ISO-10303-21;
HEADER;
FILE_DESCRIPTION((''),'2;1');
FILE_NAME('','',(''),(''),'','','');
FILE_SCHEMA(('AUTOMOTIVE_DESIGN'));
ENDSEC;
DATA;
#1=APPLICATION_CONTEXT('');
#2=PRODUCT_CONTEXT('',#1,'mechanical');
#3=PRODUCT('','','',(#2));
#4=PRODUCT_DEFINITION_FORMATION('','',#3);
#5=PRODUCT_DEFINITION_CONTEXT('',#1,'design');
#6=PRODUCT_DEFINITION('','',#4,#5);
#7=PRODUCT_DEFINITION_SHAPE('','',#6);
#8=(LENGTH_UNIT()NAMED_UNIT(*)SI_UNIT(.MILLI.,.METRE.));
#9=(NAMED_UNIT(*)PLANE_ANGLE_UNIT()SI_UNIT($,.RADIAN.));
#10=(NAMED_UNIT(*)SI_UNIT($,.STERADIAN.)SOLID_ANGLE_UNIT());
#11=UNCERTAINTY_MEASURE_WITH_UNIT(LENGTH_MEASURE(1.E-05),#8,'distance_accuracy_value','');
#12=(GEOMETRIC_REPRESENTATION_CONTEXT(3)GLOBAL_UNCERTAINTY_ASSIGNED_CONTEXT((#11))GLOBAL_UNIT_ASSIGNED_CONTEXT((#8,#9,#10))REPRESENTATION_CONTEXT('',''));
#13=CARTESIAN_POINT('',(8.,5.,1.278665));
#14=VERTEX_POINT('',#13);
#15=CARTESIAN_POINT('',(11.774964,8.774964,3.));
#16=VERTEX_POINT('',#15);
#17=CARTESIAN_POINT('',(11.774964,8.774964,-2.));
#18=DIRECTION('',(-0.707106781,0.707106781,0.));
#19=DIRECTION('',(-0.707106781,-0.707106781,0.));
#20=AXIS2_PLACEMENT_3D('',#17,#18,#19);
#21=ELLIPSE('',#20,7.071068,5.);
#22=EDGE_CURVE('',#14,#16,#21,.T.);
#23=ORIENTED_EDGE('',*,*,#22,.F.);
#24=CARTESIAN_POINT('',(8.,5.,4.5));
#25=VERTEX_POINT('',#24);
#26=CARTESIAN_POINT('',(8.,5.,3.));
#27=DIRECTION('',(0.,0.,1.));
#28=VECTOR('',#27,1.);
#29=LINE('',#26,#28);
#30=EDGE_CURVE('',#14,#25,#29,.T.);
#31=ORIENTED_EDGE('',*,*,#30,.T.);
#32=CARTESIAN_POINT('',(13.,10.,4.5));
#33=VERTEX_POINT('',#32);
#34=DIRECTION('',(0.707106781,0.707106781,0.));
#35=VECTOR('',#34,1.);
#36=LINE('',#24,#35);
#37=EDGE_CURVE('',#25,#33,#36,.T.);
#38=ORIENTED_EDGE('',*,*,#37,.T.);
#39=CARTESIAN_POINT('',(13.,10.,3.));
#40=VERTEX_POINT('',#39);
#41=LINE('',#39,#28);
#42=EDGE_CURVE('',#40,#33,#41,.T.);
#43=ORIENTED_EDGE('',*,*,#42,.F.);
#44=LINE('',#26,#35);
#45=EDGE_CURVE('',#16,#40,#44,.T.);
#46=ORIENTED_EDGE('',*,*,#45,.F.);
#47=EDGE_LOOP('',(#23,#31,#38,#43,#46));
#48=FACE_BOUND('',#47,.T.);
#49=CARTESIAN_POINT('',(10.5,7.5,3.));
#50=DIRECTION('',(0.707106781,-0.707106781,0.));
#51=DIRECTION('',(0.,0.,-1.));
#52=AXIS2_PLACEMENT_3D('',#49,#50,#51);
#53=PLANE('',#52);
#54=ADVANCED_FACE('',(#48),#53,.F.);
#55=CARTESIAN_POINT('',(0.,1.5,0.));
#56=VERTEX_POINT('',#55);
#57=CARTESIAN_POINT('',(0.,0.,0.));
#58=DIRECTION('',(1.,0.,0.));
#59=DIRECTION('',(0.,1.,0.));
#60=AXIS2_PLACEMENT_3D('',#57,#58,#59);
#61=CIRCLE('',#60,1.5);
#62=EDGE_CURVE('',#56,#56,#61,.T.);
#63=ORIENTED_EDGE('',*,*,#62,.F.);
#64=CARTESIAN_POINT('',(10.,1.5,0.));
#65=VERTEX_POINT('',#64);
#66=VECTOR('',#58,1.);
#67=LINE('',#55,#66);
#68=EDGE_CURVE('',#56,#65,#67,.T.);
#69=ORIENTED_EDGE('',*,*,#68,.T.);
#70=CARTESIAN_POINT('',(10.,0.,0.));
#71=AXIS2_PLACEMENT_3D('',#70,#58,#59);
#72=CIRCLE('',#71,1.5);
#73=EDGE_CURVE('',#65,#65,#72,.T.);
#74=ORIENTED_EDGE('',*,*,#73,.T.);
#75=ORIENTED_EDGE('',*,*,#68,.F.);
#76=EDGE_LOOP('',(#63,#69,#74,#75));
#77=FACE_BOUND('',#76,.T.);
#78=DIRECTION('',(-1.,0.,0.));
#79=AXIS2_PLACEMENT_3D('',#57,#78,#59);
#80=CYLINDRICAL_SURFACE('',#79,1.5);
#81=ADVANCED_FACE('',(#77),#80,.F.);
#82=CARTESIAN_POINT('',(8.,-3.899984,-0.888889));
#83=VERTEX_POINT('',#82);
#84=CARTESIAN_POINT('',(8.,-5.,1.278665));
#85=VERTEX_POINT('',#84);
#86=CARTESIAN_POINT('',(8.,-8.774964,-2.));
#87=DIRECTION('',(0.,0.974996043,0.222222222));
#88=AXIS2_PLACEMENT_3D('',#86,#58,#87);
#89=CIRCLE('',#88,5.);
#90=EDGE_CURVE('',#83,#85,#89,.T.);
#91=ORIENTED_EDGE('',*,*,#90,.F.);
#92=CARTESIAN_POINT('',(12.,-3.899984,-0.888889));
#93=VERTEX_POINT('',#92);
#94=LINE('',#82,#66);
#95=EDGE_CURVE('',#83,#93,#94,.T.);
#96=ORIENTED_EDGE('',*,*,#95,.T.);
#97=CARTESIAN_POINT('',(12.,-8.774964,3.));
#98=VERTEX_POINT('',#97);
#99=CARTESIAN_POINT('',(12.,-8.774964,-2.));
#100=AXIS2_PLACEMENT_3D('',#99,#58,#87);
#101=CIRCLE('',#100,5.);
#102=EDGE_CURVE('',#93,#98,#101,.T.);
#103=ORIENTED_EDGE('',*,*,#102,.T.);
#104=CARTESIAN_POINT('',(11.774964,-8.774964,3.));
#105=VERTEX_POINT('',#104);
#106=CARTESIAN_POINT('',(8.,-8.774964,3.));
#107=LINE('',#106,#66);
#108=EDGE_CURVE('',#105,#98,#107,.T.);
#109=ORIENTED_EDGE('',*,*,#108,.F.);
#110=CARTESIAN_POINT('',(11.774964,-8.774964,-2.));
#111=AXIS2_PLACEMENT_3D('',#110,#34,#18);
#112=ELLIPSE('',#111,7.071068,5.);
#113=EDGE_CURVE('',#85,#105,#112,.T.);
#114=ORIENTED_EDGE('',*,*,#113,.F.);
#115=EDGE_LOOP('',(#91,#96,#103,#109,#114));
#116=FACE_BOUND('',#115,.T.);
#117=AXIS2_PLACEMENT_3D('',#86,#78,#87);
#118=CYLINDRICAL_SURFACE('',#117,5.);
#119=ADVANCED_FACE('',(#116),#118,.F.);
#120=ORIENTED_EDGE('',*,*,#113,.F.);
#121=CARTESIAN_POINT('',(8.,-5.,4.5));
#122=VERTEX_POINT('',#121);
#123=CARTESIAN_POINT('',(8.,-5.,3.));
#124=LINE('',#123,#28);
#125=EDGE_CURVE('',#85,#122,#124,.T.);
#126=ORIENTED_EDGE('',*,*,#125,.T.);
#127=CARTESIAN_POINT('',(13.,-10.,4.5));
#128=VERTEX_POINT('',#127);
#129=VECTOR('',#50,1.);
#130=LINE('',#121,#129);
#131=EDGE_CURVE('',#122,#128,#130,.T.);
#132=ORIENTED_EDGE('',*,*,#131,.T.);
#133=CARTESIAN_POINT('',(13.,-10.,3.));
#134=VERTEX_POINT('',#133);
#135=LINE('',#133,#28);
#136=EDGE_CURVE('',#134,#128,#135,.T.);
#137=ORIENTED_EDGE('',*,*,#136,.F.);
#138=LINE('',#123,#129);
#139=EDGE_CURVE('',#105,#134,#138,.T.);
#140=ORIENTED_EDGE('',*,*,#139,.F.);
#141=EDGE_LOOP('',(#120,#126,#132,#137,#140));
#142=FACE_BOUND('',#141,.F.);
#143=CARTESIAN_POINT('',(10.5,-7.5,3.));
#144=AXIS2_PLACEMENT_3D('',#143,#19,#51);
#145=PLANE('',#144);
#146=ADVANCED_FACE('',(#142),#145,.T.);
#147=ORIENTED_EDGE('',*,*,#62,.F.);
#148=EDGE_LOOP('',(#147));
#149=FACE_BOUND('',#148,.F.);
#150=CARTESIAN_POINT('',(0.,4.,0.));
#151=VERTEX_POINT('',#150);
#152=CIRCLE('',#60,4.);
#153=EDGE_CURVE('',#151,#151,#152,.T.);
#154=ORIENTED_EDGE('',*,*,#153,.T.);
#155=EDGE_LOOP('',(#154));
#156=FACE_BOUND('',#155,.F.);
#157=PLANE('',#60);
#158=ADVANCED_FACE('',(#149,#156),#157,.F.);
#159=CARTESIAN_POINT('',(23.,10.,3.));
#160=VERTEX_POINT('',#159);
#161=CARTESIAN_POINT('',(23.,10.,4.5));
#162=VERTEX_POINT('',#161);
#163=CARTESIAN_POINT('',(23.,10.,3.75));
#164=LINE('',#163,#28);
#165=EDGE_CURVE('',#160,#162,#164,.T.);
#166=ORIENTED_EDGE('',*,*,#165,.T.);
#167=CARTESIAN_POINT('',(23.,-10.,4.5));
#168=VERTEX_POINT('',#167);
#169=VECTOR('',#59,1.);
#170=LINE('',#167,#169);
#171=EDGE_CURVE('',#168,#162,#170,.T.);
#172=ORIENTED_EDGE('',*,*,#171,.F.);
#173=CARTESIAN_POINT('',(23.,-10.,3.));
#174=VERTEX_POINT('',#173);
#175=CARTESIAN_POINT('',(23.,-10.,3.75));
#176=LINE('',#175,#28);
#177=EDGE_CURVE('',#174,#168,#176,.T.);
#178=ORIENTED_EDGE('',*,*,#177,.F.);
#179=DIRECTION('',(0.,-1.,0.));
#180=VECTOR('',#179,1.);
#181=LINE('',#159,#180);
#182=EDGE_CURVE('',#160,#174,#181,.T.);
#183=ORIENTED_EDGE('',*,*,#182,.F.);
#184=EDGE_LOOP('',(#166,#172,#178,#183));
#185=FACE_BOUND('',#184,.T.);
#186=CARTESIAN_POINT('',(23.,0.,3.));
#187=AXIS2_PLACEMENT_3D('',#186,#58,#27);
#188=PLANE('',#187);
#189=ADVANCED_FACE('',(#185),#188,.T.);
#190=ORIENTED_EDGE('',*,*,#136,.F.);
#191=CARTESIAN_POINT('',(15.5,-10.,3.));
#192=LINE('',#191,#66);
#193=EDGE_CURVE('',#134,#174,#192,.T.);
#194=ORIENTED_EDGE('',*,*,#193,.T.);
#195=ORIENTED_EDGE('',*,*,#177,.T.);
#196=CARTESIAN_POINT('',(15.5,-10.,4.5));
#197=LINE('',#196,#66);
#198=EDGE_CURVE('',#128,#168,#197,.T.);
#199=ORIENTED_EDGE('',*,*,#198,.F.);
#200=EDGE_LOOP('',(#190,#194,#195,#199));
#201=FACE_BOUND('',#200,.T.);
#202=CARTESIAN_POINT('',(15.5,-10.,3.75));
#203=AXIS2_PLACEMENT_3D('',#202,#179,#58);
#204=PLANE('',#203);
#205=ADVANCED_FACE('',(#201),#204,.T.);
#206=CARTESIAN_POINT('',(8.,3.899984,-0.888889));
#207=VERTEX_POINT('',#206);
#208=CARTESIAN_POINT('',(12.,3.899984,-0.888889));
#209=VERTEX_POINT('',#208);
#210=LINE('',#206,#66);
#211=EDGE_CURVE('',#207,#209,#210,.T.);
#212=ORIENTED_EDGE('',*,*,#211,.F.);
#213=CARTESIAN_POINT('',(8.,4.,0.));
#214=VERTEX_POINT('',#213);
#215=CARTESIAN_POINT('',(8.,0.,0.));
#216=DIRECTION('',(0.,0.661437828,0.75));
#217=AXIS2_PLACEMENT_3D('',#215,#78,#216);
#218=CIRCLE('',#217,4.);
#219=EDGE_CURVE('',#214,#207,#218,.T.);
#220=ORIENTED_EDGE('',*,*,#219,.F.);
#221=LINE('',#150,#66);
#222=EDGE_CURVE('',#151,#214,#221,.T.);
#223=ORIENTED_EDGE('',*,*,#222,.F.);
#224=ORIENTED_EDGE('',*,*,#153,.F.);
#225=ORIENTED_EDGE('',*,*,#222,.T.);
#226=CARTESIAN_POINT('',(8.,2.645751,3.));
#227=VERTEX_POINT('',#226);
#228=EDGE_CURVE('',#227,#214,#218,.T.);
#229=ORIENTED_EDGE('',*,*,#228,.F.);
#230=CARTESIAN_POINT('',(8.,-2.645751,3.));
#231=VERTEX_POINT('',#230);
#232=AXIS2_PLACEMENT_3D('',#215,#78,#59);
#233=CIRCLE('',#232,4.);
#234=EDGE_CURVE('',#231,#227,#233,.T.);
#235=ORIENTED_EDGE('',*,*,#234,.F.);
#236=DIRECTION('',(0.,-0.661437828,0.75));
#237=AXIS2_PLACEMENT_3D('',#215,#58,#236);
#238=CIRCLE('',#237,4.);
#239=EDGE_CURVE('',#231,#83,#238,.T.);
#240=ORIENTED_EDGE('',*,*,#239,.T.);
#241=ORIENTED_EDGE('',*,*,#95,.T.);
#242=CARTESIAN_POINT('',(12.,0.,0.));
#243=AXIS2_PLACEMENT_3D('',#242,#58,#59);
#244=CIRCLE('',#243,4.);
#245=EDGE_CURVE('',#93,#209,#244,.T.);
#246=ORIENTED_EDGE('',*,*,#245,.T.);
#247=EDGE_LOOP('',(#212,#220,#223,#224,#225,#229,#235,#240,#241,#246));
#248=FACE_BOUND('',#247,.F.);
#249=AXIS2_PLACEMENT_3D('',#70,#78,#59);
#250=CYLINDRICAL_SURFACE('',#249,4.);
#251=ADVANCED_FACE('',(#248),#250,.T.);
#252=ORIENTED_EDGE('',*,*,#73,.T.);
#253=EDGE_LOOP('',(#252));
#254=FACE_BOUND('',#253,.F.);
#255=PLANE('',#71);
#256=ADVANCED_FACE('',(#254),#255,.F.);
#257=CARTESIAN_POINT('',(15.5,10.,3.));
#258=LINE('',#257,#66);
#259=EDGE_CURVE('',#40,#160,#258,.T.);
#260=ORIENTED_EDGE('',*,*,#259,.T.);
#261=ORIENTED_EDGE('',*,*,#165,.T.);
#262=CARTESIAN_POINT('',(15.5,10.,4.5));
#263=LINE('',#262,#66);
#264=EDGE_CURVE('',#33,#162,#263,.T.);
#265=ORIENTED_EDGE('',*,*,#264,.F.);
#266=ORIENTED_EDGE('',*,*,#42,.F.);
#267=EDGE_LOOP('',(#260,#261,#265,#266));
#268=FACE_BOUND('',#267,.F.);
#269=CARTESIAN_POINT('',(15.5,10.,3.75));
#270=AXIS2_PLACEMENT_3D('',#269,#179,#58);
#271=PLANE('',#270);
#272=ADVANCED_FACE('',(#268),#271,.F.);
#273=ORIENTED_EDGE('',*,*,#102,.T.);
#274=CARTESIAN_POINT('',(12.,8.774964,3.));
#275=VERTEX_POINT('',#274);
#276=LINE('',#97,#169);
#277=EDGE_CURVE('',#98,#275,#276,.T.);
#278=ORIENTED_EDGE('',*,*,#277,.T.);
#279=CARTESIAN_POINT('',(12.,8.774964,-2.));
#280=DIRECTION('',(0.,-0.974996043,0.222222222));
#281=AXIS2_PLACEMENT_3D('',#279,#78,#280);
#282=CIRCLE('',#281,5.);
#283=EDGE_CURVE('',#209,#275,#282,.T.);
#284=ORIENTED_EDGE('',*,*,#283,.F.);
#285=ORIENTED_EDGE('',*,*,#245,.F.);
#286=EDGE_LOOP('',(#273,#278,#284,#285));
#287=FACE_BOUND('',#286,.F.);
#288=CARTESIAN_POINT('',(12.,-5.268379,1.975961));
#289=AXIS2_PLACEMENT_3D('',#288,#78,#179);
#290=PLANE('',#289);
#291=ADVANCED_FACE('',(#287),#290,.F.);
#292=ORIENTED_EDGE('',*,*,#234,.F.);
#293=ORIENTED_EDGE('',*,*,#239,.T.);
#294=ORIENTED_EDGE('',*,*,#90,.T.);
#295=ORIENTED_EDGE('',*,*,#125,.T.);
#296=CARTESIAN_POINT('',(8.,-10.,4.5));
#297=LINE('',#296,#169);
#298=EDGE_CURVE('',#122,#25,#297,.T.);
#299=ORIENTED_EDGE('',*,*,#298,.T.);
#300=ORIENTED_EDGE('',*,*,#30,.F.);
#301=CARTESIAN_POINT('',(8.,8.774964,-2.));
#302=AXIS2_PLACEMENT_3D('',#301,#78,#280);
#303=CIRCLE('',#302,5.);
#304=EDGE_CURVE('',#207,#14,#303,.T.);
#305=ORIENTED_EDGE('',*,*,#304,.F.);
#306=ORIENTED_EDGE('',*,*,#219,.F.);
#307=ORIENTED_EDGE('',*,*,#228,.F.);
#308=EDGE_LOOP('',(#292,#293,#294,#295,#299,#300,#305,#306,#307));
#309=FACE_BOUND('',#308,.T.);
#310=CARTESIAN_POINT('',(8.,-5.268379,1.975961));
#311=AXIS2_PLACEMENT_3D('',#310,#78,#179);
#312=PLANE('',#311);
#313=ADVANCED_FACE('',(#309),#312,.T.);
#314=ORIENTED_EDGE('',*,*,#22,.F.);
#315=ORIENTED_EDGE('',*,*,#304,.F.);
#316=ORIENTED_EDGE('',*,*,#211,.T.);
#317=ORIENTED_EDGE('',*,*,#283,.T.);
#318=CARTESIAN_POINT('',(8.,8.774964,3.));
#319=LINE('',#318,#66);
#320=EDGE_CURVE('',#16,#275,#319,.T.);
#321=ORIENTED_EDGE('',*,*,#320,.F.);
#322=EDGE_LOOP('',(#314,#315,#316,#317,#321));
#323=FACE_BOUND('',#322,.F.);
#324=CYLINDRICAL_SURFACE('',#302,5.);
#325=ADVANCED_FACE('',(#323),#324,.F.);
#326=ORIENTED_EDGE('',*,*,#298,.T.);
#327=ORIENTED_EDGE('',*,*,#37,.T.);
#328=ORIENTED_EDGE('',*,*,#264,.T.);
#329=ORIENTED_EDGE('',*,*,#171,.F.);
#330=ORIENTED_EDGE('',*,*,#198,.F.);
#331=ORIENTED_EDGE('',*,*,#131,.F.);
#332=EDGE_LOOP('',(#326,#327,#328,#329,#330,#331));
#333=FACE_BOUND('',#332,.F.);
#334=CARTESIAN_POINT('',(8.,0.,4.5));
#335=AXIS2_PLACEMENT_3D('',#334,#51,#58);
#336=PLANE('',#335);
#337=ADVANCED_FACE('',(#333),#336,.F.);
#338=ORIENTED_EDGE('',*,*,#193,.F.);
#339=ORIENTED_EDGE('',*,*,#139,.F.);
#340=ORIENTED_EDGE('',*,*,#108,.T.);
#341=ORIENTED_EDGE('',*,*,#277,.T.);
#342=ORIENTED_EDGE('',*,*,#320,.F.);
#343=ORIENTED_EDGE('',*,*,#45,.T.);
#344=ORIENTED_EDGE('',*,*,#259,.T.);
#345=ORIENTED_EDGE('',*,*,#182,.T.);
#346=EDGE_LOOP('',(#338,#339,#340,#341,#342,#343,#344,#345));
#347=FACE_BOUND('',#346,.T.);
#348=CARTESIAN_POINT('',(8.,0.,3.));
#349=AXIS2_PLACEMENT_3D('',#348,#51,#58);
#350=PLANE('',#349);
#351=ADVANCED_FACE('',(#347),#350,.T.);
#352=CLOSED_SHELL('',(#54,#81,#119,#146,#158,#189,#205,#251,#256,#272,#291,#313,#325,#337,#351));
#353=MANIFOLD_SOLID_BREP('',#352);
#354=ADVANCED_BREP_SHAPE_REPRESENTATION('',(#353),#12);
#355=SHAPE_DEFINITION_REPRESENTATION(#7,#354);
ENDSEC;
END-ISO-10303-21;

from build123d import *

# Parameters (mm, degrees)
F0_R        = 4
F0_R_2      = 1.5
F1_DEPTH    = 10
F2_R        = 4
F3_DEPTH    = 2
F4_W        = 15
F4_H        = 1.5
F5_DEPTH    = 10
F6_T1_DEPTH = 4
F7_SIZE     = 5


# Not quite as in the source:
# - a fillet or chamfer that OpenCascade refuses, or shapes differently, is made with other operations: its cross-section is extruded or revolved along the edge and cut away or added


with BuildPart() as f1:
    # F0 (on Right) → F1 (new body)
    with BuildSketch(Plane.YZ):
        Circle(F0_R)
        Circle(F0_R_2, mode=Mode.SUBTRACT)
    extrude(amount=F1_DEPTH)

    # F2 (on face) → F3 (join)
    with BuildSketch(Plane.YZ.offset(10)):
        Circle(F2_R)
    extrude(amount=F3_DEPTH)

    # F4 (on Front) → F5 (join, symmetric)
    with BuildSketch(Plane.XZ):
        with Locations((15.5, 3.75)):
            Rectangle(F4_W, F4_H)
    extrude(amount=F5_DEPTH, both=True)

    # F6: fillet of radius 5 on 2 edges, made by hand

    # F6_s2 → F6_t1 (join)
    with BuildSketch(Plane.YZ.offset(8)):
        with BuildLine():
            ThreePointArc((-3.8999841722, -0.8888888889), (-5.6569165651, 1.9086797999), (-8.7749643874, 3))
            Line((-8.7749643874, 3), (-2.6457513111, 3))
            ThreePointArc((-2.6457513111, 3), (-3.8069052328, 1.2277917365), (-3.8999841722, -0.8888888889))
        make_face()
        with BuildLine():
            ThreePointArc((3.8999841722, -0.8888888889), (5.6569165651, 1.9086797999), (8.7749643874, 3))
            Line((8.7749643874, 3), (2.6457513111, 3))
            ThreePointArc((2.6457513111, 3), (3.8069052328, 1.2277917365), (3.8999841722, -0.8888888889))
        make_face()
    extrude(amount=F6_T1_DEPTH)

    # F7
    f7_edges = [f1.edges().sort_by_distance(p)[0] for p in [
        (8, 10, 3.75),
        (8, -10, 3.75),
    ]]
    chamfer(f7_edges, length=F7_SIZE)


solid = f1.part
